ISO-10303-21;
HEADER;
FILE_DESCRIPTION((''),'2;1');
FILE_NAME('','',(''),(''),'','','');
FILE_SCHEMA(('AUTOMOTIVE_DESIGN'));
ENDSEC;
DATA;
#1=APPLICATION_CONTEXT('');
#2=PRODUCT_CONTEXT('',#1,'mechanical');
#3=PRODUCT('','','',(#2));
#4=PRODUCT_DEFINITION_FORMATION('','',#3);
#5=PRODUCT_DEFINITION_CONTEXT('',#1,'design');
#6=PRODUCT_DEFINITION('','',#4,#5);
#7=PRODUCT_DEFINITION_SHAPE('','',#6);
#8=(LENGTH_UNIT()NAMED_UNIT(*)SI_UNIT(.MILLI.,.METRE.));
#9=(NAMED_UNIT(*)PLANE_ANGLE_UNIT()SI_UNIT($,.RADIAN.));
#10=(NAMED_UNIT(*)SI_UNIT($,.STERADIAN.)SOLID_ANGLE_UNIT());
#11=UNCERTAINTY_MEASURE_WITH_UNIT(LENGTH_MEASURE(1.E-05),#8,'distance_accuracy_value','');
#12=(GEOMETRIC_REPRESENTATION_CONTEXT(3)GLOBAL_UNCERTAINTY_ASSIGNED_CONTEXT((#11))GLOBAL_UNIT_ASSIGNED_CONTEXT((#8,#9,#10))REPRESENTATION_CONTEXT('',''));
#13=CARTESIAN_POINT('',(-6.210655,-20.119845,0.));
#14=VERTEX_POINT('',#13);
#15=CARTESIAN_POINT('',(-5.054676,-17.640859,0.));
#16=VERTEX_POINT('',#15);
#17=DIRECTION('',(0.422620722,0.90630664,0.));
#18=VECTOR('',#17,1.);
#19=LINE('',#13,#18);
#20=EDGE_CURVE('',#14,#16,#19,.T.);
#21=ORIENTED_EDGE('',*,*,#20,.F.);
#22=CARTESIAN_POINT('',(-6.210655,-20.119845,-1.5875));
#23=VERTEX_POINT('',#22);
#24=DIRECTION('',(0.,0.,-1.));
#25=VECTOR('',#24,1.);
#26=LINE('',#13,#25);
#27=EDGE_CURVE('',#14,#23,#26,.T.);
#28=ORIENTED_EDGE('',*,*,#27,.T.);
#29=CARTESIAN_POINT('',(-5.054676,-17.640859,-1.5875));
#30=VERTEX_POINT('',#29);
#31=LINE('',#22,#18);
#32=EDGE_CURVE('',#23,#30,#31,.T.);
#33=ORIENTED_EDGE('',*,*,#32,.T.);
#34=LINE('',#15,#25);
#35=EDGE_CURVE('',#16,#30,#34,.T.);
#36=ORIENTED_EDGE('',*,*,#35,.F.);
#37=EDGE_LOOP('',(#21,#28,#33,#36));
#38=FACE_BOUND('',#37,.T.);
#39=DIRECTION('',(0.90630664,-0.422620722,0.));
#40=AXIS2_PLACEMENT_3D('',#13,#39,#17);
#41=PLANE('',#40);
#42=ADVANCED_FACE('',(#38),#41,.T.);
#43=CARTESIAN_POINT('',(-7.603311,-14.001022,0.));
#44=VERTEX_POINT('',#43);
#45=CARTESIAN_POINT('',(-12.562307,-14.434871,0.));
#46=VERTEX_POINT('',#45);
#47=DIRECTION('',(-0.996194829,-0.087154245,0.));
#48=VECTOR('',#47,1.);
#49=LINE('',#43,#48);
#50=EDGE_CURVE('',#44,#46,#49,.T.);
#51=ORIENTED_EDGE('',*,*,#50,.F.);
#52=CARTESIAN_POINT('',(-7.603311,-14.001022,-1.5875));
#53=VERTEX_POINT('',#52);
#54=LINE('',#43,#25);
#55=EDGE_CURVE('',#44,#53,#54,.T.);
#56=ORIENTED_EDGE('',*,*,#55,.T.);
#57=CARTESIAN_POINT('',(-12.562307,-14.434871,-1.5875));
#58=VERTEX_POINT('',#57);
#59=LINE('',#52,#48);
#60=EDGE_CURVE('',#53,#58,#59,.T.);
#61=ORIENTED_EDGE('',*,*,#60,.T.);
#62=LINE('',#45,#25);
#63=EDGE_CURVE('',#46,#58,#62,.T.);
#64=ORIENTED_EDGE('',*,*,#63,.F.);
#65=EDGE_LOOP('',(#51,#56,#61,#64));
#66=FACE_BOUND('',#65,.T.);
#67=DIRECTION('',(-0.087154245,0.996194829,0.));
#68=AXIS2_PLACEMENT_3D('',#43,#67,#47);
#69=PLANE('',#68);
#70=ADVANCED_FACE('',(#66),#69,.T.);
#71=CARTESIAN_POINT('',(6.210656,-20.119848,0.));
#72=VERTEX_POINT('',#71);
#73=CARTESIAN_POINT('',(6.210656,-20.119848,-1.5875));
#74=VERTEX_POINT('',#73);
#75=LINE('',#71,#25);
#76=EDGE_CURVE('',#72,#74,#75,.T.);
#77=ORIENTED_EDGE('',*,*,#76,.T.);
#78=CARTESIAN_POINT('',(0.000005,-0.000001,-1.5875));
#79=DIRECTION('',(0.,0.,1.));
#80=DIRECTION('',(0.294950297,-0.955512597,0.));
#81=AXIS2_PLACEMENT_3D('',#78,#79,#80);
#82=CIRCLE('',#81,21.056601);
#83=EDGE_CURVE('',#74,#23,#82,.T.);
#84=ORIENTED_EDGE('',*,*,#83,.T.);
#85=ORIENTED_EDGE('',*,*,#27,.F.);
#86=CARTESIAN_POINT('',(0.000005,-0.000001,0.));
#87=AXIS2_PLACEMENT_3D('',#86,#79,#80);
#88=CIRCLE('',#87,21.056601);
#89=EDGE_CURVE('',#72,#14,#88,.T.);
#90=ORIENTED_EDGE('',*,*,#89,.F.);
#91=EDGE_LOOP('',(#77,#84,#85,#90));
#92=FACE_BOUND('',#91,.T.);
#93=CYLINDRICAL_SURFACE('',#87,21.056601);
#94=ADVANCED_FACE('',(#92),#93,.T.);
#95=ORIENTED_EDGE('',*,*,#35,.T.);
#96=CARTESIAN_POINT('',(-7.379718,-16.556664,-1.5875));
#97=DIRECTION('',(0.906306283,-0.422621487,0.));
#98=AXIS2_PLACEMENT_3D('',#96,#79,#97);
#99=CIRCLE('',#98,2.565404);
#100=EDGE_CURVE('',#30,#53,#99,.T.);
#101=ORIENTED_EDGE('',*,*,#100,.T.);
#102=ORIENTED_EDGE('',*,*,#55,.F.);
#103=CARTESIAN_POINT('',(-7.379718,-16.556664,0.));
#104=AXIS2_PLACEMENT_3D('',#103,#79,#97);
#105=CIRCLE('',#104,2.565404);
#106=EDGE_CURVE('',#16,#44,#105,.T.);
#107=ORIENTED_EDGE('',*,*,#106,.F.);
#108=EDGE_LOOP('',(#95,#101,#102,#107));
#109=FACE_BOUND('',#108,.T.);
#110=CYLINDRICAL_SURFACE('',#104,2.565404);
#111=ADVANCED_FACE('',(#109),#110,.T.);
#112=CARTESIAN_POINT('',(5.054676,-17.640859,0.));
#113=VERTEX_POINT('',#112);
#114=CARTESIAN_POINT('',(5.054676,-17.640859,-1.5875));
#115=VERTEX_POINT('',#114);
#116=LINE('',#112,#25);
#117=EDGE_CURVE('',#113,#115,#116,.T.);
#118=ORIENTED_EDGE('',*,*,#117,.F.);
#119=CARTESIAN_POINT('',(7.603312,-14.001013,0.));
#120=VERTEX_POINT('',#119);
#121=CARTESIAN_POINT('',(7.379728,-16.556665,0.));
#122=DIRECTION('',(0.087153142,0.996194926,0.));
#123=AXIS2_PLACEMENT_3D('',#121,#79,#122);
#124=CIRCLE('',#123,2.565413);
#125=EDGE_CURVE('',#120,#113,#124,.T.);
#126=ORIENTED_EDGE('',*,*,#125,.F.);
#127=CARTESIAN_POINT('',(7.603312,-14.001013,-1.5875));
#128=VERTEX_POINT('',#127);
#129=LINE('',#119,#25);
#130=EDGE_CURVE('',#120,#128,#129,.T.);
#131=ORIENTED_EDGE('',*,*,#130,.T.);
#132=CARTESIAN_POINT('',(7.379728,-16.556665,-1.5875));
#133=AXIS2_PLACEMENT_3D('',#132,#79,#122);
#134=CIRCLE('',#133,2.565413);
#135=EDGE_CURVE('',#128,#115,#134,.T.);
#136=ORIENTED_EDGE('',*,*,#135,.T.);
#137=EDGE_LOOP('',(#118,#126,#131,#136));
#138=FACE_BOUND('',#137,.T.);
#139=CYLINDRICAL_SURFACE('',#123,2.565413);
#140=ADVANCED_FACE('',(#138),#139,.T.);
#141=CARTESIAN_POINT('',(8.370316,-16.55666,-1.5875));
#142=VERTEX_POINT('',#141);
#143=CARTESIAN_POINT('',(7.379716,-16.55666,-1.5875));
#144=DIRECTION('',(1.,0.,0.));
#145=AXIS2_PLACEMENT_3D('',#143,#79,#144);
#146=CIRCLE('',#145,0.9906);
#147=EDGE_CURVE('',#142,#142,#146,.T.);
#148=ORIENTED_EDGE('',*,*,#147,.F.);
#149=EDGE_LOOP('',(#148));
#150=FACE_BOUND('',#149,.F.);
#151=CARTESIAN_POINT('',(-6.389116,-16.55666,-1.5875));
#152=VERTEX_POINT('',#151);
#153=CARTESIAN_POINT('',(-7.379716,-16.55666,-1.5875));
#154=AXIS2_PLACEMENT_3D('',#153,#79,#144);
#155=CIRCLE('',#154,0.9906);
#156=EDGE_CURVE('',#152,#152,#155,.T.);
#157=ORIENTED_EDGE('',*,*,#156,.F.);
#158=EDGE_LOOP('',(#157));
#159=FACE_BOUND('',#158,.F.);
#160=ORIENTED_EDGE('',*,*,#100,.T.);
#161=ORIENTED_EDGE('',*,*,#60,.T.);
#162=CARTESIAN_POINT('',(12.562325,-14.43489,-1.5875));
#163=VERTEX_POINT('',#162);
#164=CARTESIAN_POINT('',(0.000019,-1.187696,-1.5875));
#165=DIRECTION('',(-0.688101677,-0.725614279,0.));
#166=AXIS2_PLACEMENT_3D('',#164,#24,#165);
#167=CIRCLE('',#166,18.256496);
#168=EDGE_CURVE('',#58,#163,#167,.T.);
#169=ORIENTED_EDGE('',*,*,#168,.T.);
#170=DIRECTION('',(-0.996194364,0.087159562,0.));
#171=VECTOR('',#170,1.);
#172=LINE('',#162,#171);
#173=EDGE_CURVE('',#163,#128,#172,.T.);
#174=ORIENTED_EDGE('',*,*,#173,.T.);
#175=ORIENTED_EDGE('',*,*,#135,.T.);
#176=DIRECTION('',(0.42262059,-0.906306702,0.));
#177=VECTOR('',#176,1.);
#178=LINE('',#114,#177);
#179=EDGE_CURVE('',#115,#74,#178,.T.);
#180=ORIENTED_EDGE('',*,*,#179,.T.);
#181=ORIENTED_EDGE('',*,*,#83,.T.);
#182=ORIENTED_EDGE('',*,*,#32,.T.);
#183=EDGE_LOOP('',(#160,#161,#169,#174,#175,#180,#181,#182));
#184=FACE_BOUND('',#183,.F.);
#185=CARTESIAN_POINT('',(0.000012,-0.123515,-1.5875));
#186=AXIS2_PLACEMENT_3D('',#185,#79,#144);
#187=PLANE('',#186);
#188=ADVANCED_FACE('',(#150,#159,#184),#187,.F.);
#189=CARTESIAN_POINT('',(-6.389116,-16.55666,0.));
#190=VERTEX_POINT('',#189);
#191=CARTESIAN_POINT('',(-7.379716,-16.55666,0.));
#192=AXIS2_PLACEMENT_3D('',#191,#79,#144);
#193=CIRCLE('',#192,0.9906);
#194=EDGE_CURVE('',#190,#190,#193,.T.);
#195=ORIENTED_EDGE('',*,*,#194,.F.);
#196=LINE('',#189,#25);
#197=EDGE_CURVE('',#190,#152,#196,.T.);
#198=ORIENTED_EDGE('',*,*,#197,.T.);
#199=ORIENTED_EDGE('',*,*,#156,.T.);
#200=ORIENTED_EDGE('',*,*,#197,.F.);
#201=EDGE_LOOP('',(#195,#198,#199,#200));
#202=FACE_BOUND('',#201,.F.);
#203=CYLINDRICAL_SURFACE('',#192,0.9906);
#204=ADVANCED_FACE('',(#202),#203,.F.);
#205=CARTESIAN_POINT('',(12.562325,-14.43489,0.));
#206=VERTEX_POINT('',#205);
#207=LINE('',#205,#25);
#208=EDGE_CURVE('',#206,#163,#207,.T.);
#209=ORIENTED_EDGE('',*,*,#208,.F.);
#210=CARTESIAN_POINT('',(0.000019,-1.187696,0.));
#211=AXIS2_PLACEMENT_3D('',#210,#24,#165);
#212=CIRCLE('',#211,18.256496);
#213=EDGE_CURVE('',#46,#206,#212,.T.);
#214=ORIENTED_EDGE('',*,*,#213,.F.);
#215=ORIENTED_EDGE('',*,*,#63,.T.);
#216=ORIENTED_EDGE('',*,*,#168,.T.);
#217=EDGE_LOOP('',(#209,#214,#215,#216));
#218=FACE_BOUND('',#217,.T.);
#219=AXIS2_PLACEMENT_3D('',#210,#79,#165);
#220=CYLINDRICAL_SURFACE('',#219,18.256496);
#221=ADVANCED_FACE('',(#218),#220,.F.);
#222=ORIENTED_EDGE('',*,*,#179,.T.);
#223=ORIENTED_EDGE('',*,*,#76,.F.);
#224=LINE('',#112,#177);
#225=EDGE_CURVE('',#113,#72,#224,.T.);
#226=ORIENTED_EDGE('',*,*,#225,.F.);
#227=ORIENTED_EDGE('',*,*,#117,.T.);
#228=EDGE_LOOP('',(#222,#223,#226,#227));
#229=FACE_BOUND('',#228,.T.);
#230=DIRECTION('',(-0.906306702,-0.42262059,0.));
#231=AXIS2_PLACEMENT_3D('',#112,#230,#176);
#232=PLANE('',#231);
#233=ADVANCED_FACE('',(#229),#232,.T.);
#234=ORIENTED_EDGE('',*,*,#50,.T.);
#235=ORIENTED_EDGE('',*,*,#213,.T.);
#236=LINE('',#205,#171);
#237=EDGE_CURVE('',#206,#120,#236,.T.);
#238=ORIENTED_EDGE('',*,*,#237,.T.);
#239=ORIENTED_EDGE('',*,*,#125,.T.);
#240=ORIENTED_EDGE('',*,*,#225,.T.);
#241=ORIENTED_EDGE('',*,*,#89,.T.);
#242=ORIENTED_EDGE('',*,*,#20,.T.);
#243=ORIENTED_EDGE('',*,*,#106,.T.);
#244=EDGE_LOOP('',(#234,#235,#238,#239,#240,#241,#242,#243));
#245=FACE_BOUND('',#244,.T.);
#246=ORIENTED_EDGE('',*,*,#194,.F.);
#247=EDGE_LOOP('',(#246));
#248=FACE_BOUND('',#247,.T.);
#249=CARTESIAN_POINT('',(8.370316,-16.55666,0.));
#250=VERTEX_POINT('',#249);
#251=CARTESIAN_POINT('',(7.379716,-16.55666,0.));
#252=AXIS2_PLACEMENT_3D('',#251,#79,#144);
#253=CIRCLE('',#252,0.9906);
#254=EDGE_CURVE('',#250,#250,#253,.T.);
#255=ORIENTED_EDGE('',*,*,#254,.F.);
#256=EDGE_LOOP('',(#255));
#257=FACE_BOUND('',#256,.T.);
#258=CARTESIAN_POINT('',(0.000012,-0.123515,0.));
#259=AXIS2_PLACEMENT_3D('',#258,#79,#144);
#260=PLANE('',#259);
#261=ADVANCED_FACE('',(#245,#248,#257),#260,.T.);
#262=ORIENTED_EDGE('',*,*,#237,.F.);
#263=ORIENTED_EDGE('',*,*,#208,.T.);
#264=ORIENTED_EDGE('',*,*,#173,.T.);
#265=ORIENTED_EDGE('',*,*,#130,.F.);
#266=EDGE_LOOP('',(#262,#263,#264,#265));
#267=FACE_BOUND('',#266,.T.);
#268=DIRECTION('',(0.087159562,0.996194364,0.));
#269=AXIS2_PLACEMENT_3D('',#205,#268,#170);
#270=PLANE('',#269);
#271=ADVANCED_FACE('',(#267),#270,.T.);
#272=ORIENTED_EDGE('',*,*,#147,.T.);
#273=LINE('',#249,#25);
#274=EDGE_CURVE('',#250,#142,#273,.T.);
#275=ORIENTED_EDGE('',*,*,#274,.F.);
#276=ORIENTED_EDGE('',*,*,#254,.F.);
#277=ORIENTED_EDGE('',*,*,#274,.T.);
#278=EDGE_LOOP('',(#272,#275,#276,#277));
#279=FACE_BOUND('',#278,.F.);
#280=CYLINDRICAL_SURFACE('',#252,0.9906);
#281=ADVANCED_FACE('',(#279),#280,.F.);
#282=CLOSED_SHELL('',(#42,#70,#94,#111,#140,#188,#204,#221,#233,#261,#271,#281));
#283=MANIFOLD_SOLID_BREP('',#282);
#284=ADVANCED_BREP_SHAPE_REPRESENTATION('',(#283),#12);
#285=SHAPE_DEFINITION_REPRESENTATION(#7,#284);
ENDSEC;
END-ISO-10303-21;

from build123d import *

# Parameters (mm, degrees)
F0_R     = 0.9906
F1_DEPTH = 1.5875


# Not quite as in the source:
# - ends of sketch curves that miss each other by under 0.0002 mm in the source are joined


with BuildPart() as f1:
    # F0 (on Top) → F1 (new body)
    with BuildSketch(Plane.XY):
        with BuildLine():
            Line((41.6924998, -18.8505592), (42.8484792, -21.3295484))
            ThreePointArc((42.8484792, -21.3295484), (36.6378236, 19.8468996), (30.4271688612, -21.32954561))
            Line((30.4271688612, -21.32954561), (31.5831474, -18.8505592))
            ThreePointArc((31.5831474, -18.8505592), (31.3595624423, -16.2949103348), (29.034512192, -15.2107228522))
            Line((29.034512192, -15.2107228522), (24.075517, -15.6445712))
            ThreePointArc((24.075517, -15.6445712), (36.6378236, 15.8590996), (49.2001483474, -15.6445903367))
            Line((49.2001483474, -15.6445903367), (44.2411358, -15.2107138))
            ThreePointArc((44.2411358, -15.2107138), (41.9160847577, -16.2949103348), (41.6924998, -18.8505592))
        make_face()
        with Locations((29.2581076, -17.7663602)):
            Circle(F0_R, mode=Mode.SUBTRACT)
        with Locations((44.0175396, -17.7663602)):
            Circle(F0_R, mode=Mode.SUBTRACT)
    extrude(amount=-F1_DEPTH)


with BuildPart() as f1_1:
    # F3: moved
    add(f1.part.moved(Location((-36.6378236, -19.8468996, 0))))


with BuildPart() as f1_2:
    # F4: moved
    add(f1_1.part.moved(Location((0, 21.0566, 0))))


solid = f1_2.part
